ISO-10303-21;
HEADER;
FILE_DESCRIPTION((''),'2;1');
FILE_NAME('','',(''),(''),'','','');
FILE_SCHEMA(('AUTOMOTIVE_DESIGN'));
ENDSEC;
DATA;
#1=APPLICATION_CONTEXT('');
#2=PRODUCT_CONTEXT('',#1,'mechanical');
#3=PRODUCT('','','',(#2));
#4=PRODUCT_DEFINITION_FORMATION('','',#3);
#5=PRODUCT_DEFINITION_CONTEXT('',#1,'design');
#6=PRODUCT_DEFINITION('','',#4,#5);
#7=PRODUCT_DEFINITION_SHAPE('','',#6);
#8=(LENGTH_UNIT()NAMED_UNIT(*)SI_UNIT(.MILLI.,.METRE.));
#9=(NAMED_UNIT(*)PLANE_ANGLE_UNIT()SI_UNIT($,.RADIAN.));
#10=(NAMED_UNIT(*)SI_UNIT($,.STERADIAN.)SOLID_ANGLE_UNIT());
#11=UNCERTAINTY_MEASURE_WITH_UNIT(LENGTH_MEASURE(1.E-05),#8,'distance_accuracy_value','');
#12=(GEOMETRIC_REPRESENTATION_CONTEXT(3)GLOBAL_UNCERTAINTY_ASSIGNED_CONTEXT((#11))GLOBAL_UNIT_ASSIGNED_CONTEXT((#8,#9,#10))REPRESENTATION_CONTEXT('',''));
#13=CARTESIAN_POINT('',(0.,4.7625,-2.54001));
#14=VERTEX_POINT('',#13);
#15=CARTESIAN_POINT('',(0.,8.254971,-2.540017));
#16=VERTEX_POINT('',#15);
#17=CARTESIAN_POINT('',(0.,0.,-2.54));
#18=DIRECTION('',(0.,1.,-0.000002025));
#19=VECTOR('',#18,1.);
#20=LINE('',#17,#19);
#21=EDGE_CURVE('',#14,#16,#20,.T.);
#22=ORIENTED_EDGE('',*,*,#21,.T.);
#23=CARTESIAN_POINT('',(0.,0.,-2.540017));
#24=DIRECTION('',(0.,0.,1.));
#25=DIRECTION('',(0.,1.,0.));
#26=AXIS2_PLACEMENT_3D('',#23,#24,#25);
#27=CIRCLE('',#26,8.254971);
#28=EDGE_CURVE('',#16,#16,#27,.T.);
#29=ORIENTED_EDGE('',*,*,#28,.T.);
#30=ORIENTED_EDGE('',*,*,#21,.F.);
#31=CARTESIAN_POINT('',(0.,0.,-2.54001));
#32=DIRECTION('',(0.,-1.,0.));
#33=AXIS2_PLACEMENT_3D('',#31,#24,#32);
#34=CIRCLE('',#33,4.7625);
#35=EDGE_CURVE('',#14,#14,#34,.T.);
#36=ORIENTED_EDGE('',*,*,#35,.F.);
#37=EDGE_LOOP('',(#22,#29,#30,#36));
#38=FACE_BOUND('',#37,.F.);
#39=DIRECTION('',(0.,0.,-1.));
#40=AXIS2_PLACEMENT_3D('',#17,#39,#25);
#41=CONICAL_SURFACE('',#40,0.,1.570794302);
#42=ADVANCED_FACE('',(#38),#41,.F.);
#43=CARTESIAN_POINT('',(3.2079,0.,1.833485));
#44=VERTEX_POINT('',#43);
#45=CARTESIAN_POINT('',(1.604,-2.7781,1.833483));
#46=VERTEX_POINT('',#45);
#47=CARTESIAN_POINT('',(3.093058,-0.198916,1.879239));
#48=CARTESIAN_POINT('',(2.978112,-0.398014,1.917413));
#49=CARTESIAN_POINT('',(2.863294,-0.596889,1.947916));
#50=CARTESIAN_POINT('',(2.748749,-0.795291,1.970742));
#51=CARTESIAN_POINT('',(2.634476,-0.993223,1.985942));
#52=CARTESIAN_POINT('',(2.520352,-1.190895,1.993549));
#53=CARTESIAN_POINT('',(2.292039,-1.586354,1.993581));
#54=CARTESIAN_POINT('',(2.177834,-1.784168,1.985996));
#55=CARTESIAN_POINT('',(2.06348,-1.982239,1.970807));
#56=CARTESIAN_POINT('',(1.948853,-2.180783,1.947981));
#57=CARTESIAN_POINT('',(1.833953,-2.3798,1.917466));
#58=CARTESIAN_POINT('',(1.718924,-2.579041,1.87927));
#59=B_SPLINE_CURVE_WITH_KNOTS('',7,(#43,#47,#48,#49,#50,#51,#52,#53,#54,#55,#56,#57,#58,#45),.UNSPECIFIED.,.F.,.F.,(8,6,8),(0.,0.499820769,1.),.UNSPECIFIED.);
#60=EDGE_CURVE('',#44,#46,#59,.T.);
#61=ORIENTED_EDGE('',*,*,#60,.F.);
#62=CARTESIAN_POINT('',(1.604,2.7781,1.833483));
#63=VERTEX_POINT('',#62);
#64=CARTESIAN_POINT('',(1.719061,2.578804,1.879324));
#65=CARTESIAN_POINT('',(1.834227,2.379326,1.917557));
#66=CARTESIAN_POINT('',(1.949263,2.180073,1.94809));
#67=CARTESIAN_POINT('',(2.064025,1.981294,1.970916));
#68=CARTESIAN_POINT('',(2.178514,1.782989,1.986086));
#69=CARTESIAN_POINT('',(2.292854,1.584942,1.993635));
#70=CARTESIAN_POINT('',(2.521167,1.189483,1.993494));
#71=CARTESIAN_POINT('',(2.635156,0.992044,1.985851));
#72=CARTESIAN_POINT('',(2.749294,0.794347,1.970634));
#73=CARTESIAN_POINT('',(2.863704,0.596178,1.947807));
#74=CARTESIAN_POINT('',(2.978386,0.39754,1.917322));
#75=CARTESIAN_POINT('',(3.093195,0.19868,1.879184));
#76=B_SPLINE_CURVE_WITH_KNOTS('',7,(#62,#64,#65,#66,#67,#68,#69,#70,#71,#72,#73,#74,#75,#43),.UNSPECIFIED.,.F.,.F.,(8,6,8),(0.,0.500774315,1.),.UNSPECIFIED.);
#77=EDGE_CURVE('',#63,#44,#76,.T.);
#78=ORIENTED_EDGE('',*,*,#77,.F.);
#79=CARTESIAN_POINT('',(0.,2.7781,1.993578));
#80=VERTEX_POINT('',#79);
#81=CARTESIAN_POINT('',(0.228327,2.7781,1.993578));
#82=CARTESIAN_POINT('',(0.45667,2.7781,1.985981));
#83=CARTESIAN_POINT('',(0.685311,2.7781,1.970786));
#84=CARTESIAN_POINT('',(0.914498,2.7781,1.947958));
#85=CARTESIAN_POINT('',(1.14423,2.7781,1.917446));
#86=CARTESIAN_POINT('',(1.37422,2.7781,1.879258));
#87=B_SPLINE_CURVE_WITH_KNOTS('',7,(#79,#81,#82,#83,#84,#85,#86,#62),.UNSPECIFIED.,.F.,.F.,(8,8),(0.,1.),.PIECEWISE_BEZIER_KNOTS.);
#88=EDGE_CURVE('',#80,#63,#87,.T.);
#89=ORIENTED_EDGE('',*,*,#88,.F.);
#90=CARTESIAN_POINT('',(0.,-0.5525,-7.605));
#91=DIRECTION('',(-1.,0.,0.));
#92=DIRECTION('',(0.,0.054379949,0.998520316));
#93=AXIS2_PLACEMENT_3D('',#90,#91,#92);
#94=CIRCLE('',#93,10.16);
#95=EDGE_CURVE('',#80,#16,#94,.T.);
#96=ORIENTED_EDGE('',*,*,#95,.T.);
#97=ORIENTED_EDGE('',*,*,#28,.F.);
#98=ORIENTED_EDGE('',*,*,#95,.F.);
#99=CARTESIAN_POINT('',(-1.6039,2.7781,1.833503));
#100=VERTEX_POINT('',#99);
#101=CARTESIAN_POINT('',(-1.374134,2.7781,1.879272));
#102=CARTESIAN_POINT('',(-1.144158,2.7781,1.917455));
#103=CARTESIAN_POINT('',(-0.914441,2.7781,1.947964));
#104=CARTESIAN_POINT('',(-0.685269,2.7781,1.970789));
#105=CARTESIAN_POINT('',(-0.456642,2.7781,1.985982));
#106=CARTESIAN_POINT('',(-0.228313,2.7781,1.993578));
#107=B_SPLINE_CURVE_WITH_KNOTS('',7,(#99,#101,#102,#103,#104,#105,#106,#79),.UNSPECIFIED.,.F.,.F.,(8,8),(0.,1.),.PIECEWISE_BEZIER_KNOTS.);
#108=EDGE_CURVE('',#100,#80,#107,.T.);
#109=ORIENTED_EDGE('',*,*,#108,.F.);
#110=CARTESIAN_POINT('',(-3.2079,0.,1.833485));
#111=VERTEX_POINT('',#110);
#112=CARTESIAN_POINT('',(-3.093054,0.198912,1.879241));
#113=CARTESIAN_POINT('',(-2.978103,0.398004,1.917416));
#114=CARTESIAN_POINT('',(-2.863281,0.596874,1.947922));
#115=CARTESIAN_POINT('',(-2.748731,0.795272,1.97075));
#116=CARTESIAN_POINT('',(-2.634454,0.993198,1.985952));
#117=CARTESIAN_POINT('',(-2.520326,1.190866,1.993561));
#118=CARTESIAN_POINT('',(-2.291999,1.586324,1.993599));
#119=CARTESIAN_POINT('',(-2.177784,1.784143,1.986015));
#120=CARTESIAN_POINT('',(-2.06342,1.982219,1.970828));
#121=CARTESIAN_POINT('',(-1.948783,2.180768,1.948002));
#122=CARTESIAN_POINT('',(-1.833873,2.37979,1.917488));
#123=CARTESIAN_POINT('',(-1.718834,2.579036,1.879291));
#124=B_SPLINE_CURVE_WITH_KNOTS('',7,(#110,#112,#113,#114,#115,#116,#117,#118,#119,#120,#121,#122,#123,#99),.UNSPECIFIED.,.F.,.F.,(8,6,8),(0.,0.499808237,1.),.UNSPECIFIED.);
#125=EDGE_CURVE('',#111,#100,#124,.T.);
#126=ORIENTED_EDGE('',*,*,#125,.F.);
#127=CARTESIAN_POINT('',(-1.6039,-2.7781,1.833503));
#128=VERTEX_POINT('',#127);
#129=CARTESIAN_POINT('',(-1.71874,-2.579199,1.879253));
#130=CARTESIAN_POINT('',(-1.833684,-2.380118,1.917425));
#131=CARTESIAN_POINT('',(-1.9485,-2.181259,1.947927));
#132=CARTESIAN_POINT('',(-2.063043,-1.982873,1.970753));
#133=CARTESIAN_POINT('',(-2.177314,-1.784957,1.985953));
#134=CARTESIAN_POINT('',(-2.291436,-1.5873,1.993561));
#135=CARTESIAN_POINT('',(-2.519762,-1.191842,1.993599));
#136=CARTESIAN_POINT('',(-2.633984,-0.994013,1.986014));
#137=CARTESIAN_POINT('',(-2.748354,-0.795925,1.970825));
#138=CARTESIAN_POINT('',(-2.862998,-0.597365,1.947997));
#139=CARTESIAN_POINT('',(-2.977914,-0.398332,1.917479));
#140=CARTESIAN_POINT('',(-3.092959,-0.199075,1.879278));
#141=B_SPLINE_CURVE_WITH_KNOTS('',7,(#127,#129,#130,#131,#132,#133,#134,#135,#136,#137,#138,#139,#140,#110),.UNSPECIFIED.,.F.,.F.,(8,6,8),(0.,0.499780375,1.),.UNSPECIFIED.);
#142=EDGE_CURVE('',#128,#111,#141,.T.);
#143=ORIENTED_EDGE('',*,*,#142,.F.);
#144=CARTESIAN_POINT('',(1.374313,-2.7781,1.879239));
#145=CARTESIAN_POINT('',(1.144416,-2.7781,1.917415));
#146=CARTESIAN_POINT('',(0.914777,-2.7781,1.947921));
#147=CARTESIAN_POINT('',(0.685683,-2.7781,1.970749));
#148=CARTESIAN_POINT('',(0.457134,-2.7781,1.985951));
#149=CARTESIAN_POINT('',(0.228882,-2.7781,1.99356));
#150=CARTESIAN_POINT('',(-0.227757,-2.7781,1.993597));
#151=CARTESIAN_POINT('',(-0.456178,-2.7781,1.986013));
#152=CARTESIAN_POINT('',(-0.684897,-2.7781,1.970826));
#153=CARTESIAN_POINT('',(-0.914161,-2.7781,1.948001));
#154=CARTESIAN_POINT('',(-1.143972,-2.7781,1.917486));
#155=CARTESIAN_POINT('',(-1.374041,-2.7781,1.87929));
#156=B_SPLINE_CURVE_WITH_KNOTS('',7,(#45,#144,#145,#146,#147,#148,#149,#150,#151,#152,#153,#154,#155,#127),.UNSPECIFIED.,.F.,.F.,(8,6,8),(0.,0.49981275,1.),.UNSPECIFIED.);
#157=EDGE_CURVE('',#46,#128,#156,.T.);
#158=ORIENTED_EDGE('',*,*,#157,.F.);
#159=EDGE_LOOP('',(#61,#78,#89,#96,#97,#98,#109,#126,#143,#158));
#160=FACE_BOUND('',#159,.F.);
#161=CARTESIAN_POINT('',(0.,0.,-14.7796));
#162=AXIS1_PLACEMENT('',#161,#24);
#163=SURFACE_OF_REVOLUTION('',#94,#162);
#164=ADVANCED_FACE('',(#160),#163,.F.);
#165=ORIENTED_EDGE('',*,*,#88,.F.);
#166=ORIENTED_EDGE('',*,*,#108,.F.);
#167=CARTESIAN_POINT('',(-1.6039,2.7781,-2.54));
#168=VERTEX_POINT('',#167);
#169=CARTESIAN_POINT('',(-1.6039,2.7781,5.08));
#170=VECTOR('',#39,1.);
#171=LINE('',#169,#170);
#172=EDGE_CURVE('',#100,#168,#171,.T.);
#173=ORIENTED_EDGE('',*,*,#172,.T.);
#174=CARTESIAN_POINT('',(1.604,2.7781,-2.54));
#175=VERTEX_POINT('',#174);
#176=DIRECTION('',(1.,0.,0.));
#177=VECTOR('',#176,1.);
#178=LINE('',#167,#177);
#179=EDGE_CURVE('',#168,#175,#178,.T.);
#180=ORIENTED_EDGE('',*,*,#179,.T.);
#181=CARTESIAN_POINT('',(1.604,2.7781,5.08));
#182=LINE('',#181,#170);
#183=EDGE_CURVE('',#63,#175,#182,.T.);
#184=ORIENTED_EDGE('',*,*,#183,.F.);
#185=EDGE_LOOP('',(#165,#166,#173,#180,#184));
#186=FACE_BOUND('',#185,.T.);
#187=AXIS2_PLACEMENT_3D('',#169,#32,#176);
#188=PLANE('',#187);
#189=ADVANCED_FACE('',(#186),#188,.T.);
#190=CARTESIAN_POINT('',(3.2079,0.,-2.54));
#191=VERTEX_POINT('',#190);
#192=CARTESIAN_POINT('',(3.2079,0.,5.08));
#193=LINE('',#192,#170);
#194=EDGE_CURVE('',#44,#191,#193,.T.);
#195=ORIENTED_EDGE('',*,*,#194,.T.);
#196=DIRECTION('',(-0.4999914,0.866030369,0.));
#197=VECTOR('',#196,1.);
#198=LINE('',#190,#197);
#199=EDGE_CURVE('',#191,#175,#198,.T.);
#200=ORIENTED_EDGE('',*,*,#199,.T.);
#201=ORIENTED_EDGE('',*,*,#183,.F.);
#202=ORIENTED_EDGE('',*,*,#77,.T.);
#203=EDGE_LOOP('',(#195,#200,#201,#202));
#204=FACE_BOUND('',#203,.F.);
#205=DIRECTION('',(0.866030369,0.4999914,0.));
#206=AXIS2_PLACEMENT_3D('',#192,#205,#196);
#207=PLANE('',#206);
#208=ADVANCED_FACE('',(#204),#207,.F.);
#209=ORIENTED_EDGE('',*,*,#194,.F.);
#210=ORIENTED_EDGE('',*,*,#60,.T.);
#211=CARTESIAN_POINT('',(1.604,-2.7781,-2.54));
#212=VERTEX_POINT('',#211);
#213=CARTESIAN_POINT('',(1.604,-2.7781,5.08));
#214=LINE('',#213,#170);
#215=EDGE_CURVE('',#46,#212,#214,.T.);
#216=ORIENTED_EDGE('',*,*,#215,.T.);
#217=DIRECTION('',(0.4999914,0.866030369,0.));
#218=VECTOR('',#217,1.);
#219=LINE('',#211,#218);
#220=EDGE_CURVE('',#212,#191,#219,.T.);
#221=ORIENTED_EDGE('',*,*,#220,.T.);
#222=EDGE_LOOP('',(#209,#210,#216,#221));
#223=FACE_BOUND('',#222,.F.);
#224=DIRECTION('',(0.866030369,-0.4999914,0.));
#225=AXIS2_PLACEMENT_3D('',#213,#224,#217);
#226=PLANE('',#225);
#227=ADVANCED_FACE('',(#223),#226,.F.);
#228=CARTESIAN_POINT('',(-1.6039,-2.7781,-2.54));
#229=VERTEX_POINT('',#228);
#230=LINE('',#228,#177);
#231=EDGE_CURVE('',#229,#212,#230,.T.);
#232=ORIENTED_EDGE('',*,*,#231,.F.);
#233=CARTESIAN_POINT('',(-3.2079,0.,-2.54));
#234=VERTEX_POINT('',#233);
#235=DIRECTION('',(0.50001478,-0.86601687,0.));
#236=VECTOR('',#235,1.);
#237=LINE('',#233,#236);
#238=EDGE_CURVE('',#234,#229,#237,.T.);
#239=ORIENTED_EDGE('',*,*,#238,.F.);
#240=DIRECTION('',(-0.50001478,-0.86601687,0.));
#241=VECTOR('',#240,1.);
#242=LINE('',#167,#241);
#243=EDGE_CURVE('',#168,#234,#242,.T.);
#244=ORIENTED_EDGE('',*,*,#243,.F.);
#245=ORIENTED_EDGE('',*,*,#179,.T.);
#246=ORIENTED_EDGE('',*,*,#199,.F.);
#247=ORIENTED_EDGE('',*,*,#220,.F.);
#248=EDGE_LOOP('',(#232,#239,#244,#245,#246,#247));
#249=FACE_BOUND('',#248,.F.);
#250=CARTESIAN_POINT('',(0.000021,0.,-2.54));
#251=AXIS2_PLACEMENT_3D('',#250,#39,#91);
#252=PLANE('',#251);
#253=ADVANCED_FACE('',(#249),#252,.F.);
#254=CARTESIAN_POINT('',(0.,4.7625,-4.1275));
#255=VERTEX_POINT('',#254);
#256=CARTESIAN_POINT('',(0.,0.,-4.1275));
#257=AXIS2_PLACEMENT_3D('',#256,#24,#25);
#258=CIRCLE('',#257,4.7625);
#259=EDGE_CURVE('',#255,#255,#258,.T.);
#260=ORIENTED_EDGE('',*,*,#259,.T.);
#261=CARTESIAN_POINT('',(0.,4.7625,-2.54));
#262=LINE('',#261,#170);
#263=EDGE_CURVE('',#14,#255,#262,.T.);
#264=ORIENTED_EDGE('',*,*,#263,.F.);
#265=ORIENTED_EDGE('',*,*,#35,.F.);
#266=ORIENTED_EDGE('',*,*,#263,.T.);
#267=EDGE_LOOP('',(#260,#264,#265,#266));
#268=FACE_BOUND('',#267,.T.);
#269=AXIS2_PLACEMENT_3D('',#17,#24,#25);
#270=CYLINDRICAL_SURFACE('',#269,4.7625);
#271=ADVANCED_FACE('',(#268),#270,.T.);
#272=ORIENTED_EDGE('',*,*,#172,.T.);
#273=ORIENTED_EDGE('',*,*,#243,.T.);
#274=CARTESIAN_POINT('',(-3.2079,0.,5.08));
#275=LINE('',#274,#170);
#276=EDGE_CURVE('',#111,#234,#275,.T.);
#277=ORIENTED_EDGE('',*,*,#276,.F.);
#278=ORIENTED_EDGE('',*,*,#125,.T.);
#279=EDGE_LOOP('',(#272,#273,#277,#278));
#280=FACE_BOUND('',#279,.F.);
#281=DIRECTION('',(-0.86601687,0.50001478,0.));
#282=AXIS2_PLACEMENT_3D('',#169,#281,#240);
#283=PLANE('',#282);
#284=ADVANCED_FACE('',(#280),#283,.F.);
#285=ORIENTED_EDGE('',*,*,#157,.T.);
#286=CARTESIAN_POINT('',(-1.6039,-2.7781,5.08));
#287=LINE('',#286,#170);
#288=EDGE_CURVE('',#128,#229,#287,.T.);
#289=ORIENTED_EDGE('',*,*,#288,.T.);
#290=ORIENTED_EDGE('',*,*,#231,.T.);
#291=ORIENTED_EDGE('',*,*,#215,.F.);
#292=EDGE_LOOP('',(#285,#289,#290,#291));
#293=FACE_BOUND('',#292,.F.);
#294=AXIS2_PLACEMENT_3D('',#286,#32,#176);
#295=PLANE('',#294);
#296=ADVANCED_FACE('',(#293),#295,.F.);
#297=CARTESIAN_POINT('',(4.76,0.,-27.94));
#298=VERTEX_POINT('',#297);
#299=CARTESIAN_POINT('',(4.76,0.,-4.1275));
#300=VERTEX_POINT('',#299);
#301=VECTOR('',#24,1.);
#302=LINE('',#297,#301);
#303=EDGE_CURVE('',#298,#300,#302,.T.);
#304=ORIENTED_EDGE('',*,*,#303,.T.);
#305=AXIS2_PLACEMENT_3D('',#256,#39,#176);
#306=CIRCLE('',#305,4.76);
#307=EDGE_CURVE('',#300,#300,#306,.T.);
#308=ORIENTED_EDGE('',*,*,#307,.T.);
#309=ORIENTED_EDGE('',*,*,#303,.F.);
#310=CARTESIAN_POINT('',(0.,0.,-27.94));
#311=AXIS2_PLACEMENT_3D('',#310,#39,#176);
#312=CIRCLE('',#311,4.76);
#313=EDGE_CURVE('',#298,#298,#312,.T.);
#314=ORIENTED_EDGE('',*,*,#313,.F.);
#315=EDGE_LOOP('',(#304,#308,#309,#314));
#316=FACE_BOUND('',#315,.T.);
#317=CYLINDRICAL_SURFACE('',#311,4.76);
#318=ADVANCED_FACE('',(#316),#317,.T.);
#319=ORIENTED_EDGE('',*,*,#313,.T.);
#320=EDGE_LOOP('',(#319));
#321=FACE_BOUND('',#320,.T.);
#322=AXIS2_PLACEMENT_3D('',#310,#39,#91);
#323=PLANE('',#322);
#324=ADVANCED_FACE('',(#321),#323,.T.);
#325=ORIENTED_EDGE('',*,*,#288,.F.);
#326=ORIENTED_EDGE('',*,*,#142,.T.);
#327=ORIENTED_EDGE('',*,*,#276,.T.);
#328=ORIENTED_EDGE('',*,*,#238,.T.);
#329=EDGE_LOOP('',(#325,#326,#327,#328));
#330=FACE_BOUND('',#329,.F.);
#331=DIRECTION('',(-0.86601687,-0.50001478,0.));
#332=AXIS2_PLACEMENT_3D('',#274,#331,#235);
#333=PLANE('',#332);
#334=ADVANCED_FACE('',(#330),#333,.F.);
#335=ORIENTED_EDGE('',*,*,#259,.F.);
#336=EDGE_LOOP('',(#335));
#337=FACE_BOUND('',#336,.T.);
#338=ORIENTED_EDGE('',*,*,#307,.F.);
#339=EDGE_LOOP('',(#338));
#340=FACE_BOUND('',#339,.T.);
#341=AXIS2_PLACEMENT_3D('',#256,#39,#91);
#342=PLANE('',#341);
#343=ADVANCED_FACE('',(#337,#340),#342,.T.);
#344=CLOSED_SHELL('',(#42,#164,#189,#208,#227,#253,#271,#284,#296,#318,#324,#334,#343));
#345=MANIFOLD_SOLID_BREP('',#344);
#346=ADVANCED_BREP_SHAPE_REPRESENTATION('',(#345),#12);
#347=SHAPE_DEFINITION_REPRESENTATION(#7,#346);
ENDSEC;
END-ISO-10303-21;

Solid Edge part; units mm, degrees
sketch "Sketch1" plane through (0, 0, 0) normal (1, 0, 0) x (0, 1, 0)
  line L0 (0, -2.54) -> (0, 2.54)
  arc A0 (0, 2.54) -> (8.255, -2.54) centre (-0.5525, -7.605) cw
  line L1 (0, -2.54) -> (8.255, -2.54)
  dimension "D1" = 5.08
  dimension "D2" = 10.16
revolve "RevolvedProtrusion1" add sketch "Sketch1" angle 360 about axis through (0, 0, -14.7796) along (0, 0, 1)
sketch "Sketch2" plane through (0, 0, -2.54) normal (0, 0, -1) x (0, 1, 0)
  circle A0 centre (0, 0) radius 4.7625
  dimension "D1" = 9.525
extrude "Protrusion1" add sketch "Sketch2" along normal blind 25.4
sketch "Sketch3" plane through (0, 0, -27.94) normal (0, 0, -1) x (1, 0, 0)
  circle A0 centre (0, 0) radius 4.76
  dimension "D1" = 0.0025
extrude "Cutout1" cut sketch "Sketch3" against normal blind 23.8125 flip side to cut
sketch "Sketch4" plane through (-0.6032, 0.3606, 5.08) normal (0, 0, 1) x (1, 0, 0)
  line L0 (-1.0007, 2.4175) -> (2.2072, 2.4175)
  line L1 (3.8111, -0.3606) -> (2.2072, 2.4175)
  line L2 (2.2072, -3.1387) -> (3.8111, -0.3606)
  line L3 (-1.0007, -3.1387) -> (2.2072, -3.1387)
  line L4 (-2.6047, -0.3606) -> (-1.0007, -3.1387)
  line L5 (-1.0007, 2.4175) -> (-2.6047, -0.3606)
extrude "ExtrudedCutout_11" cut sketch "Sketch4" against normal blind 7.62
properties part number "163738"
